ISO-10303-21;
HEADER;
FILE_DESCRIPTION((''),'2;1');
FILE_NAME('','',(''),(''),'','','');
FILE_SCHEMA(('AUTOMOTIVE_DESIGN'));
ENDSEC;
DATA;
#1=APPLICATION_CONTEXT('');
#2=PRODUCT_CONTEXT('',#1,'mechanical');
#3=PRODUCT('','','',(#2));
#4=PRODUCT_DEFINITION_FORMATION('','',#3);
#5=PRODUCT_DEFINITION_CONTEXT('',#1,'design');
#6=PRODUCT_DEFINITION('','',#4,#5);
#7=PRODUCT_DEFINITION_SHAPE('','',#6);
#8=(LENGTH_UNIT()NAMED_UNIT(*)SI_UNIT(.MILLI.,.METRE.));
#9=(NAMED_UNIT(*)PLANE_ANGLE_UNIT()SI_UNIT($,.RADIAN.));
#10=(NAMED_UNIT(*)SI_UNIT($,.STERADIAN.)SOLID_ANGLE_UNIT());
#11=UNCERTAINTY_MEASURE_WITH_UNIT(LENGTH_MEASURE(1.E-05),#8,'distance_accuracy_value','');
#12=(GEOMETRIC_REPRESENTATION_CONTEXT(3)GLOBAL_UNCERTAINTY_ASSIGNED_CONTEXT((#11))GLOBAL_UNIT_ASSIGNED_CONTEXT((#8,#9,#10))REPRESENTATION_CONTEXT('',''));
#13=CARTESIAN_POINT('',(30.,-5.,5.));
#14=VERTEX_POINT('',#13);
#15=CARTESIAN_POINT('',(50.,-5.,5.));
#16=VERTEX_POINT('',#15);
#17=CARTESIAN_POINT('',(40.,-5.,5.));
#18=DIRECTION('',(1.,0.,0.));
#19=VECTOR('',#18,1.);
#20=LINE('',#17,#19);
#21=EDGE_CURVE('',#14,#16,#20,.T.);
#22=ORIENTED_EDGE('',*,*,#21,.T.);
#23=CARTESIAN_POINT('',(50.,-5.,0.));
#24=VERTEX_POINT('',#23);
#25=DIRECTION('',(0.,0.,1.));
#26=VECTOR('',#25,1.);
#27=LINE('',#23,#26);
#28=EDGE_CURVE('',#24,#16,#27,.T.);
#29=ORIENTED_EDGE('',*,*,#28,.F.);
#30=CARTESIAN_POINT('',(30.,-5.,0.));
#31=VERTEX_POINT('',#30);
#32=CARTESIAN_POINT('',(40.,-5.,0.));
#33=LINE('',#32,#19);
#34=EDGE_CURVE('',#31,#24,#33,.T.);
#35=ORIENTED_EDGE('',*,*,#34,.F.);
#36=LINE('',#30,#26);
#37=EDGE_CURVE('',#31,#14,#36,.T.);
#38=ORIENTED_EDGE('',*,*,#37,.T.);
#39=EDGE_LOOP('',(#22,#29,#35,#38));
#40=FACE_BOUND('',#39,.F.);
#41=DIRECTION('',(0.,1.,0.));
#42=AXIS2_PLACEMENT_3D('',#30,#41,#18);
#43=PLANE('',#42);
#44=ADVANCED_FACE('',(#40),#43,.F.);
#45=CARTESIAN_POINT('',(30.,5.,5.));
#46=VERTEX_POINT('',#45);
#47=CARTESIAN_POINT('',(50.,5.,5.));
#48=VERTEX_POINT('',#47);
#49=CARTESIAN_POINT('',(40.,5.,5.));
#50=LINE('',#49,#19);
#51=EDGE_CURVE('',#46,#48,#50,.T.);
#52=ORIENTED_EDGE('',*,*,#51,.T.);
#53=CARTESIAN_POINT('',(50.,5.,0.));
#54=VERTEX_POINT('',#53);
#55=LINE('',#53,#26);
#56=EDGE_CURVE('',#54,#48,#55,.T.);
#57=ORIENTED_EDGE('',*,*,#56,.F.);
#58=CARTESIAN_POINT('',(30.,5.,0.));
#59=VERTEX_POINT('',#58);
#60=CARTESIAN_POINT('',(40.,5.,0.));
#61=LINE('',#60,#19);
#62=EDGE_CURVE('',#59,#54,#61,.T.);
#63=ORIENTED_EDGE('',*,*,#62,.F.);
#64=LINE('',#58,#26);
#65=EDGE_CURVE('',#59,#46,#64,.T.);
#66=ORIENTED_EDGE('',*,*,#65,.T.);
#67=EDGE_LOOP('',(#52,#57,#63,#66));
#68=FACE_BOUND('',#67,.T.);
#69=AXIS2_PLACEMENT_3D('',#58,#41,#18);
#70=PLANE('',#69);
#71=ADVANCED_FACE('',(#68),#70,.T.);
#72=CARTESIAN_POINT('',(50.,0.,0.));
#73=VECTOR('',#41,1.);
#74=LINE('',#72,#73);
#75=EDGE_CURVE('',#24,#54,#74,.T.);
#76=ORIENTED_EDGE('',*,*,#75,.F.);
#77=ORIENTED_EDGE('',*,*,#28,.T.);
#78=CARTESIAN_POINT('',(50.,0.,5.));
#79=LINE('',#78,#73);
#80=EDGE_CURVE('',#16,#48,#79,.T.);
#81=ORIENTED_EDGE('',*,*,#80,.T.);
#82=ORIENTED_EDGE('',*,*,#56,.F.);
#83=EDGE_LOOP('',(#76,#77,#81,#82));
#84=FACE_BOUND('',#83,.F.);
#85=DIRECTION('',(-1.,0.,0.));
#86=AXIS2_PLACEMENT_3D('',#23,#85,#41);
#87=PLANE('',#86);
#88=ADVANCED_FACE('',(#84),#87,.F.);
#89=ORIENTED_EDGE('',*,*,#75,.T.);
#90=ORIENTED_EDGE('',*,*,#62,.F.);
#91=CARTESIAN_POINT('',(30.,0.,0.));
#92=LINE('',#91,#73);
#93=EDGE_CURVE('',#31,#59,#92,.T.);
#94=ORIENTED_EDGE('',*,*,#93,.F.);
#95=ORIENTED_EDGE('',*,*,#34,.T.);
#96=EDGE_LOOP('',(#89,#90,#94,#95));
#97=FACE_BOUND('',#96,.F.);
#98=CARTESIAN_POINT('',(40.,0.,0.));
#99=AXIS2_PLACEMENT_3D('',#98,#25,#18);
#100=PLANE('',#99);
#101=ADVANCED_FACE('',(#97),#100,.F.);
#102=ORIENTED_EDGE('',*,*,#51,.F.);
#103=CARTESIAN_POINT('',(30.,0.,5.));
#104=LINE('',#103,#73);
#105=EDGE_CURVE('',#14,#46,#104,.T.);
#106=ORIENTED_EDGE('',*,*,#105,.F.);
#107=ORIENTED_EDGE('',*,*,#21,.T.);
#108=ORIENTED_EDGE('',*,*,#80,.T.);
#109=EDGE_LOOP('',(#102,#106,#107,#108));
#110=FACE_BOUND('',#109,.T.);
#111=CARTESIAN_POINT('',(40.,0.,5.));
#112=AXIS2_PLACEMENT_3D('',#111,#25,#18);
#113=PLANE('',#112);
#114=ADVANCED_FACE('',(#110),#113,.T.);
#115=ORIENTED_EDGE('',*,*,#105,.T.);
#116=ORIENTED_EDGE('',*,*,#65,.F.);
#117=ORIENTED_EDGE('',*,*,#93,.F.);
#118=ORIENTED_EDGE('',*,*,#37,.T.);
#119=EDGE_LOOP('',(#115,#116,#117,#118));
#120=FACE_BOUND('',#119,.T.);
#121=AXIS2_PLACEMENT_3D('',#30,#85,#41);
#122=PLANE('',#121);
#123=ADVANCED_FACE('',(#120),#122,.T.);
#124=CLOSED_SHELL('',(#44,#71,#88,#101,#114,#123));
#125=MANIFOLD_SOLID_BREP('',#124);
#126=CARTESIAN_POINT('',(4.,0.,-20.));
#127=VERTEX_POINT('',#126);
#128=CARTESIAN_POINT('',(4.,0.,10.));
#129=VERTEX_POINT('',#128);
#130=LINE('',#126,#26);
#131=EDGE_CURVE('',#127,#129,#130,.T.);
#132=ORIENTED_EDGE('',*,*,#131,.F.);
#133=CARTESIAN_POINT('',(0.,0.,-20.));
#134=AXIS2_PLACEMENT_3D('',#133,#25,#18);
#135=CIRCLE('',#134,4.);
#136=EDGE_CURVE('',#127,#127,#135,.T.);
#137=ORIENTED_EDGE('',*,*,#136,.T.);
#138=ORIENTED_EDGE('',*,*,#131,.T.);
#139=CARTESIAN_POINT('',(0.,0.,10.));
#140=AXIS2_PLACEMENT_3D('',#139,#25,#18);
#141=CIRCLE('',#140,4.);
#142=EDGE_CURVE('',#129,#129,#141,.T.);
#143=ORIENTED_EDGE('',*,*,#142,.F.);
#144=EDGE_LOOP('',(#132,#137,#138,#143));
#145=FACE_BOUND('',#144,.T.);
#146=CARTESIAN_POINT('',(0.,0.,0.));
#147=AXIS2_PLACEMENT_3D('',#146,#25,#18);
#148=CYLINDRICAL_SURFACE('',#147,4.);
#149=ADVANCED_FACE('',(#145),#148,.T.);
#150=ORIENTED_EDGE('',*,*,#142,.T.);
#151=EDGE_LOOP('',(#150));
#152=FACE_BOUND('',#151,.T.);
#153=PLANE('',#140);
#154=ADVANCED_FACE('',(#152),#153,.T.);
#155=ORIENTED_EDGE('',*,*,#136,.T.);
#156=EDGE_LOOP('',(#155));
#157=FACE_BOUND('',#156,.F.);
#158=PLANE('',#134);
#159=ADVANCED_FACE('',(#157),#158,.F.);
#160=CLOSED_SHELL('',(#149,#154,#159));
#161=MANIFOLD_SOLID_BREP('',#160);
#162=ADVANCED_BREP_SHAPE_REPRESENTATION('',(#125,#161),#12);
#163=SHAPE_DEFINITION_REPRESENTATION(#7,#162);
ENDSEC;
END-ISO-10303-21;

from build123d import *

# Parameters (mm, degrees)
F0_W          = 20
F0_H          = 10
F1_DEPTH      = 5
F0_R          = 4
F3_DEPTH      = 10
F3_DEPTH_BACK = 20


# Not quite as in the source:
# - a feature names something its author has since deleted; it is built from what else it names


with BuildPart() as f1:
    # F0 (on Top) → F1 (new body)
    with BuildSketch(Plane.XY):
        with Locations((40, 0)):
            Rectangle(F0_W, F0_H)
    extrude(amount=F1_DEPTH)


with BuildPart() as f3:
    # F0 (on Top) → F3 (new body, two sides)
    with BuildSketch(Plane.XY) as f3_sk:
        Circle(F0_R)
    extrude(amount=F3_DEPTH)
    extrude(f3_sk.sketch, amount=-F3_DEPTH_BACK)


solid = Compound([f1.part, f3.part])
